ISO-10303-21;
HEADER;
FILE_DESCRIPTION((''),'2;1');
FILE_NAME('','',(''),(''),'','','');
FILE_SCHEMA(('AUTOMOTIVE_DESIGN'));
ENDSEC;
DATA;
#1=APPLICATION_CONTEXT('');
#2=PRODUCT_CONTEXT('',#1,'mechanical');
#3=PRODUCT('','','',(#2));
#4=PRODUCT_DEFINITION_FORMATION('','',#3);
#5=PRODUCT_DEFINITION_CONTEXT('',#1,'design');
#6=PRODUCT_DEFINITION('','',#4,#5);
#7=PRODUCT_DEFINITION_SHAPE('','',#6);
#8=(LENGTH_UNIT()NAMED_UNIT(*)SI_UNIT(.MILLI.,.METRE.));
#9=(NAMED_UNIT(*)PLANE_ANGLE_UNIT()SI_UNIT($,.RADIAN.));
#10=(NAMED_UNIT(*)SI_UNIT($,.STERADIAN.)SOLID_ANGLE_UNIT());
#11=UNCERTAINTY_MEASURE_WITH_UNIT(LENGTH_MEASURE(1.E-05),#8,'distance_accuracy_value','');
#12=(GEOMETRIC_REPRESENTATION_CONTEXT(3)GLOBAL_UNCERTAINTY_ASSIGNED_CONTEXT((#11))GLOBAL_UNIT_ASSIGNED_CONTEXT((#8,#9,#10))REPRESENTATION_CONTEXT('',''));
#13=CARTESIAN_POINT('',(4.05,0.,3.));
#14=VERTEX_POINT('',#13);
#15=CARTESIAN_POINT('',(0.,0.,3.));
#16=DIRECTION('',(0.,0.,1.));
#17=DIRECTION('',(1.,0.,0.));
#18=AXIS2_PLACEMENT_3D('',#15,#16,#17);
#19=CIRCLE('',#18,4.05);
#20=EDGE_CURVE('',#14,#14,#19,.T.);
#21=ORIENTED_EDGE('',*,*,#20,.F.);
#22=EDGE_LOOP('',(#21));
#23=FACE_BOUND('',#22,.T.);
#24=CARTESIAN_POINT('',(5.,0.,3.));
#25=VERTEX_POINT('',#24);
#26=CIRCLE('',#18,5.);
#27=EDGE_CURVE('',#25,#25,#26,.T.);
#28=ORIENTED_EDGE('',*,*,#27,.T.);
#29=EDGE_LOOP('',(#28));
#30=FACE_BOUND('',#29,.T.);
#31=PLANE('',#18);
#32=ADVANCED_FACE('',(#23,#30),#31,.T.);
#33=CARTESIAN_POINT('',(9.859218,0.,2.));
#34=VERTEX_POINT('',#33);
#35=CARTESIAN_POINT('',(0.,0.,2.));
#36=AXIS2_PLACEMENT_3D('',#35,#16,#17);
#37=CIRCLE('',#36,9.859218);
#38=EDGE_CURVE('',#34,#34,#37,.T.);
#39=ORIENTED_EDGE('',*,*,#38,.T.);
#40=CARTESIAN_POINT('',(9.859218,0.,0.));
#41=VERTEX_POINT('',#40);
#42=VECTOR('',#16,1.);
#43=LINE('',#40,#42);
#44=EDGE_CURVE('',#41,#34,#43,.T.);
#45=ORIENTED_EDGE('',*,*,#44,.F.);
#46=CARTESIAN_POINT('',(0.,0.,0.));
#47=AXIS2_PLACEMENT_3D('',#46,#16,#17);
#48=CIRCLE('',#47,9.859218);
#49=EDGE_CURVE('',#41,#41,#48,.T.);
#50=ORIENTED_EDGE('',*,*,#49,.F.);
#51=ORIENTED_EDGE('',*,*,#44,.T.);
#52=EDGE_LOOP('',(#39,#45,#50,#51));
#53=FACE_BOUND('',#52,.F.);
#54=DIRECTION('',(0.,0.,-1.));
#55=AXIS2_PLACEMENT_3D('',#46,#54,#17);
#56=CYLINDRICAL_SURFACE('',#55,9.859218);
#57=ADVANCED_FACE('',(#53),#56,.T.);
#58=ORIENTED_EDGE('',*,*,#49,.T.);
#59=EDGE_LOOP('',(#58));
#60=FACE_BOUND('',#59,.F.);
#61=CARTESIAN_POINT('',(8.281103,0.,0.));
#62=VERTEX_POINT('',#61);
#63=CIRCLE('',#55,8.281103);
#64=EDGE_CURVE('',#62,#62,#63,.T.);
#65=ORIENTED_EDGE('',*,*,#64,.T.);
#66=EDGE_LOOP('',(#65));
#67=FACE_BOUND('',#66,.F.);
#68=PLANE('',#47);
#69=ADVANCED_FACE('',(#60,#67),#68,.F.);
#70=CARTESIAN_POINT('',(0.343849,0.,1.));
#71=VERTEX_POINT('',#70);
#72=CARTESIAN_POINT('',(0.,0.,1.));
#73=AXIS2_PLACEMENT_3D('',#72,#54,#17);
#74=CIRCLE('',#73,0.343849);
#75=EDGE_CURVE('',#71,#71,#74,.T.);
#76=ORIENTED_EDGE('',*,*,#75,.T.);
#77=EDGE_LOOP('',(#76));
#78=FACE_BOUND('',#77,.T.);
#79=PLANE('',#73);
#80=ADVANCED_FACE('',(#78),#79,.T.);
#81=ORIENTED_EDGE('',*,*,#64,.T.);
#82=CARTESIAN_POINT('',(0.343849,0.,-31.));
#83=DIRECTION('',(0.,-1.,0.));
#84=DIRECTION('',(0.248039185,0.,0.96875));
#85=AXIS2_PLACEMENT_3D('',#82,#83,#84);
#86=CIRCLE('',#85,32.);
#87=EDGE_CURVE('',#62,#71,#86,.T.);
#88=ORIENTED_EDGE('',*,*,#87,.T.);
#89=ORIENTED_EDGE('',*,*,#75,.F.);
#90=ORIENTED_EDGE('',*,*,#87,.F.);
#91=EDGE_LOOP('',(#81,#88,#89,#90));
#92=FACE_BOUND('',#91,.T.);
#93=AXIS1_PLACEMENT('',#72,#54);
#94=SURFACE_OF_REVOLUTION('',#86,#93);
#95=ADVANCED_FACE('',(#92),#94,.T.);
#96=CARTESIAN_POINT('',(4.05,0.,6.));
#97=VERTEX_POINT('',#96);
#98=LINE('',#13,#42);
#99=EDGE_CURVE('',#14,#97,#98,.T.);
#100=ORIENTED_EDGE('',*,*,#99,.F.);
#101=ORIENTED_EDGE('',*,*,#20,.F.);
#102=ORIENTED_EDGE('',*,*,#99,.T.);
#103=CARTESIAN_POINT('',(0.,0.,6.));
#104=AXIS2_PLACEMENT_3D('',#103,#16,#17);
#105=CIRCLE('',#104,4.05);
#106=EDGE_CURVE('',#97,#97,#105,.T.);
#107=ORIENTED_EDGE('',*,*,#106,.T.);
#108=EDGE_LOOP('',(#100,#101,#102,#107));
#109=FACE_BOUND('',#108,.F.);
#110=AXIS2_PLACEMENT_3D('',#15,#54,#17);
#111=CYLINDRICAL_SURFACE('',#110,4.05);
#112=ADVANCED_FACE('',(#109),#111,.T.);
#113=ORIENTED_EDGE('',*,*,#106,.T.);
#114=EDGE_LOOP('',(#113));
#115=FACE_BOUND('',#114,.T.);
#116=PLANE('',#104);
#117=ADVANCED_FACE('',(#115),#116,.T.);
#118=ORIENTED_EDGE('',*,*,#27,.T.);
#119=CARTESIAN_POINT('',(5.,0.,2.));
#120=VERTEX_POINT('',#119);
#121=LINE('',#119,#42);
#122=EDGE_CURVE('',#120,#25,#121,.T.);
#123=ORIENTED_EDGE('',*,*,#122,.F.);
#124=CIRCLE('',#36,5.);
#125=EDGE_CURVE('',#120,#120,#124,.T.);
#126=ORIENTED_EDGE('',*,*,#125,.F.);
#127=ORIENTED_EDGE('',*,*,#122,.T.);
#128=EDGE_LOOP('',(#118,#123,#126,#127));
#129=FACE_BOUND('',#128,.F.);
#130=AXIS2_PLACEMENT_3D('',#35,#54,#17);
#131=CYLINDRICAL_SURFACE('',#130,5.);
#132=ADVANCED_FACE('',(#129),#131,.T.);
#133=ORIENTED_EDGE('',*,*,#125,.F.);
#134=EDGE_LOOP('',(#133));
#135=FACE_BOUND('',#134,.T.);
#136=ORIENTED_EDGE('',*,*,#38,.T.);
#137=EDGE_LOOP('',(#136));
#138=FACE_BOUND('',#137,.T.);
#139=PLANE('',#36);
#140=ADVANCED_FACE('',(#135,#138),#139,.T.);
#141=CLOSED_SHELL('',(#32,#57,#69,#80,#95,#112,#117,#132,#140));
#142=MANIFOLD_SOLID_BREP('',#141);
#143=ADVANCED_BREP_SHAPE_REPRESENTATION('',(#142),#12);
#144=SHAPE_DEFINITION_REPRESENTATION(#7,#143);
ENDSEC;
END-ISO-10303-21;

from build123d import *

# Parameters (mm, degrees)
F0_R     = 9.8592181747
F1_DEPTH = 2
F2_R     = 5
F3_DEPTH = 1
F4_R     = 4.05
F5_DEPTH = 3
F6_R     = 8.2811029309
F7_DEPTH = 1


# Not quite as in the source:
# - a fillet or chamfer that OpenCascade refuses, or shapes differently, is made with other operations: its cross-section is extruded or revolved along the edge and cut away or added


with BuildPart() as f1:
    # F0 (on Top) → F1 (new body)
    with BuildSketch(Plane.XY):
        Circle(F0_R)
    extrude(amount=F1_DEPTH)

    # F2 (on face) → F3 (join)
    with BuildSketch(Plane.XY.offset(2)):
        Circle(F2_R)
    extrude(amount=F3_DEPTH)

    # F4 (on face) → F5 (join)
    with BuildSketch(Plane.XY.offset(3)):
        Circle(F4_R)
    extrude(amount=F5_DEPTH)

    # F6 (on face) → F7 (cut)
    with BuildSketch(Plane(origin=(0, 0, 0), x_dir=(1, 0, 0), z_dir=(0, 0, -1))):
        Circle(F6_R)
    extrude(amount=-F7_DEPTH, mode=Mode.SUBTRACT)

    # F8: fillet of radius 32 on 1 edges, made by hand

    # F8_s1 → F8_t2 (revolve)
    with BuildSketch(Plane.XZ):
        with BuildLine():
            ThreePointArc((8.2811029309, 0), (4.3438489977, 0.7490157328), (0.3438489977, 1))
            Line((0.3438489977, 1), (8.2811029309, 1))
            Line((8.2811029309, 1), (8.2811029309, 0))
        make_face()
    revolve(axis=Axis((0, 0, 1), (0, 0, -1)))


solid = f1.part
